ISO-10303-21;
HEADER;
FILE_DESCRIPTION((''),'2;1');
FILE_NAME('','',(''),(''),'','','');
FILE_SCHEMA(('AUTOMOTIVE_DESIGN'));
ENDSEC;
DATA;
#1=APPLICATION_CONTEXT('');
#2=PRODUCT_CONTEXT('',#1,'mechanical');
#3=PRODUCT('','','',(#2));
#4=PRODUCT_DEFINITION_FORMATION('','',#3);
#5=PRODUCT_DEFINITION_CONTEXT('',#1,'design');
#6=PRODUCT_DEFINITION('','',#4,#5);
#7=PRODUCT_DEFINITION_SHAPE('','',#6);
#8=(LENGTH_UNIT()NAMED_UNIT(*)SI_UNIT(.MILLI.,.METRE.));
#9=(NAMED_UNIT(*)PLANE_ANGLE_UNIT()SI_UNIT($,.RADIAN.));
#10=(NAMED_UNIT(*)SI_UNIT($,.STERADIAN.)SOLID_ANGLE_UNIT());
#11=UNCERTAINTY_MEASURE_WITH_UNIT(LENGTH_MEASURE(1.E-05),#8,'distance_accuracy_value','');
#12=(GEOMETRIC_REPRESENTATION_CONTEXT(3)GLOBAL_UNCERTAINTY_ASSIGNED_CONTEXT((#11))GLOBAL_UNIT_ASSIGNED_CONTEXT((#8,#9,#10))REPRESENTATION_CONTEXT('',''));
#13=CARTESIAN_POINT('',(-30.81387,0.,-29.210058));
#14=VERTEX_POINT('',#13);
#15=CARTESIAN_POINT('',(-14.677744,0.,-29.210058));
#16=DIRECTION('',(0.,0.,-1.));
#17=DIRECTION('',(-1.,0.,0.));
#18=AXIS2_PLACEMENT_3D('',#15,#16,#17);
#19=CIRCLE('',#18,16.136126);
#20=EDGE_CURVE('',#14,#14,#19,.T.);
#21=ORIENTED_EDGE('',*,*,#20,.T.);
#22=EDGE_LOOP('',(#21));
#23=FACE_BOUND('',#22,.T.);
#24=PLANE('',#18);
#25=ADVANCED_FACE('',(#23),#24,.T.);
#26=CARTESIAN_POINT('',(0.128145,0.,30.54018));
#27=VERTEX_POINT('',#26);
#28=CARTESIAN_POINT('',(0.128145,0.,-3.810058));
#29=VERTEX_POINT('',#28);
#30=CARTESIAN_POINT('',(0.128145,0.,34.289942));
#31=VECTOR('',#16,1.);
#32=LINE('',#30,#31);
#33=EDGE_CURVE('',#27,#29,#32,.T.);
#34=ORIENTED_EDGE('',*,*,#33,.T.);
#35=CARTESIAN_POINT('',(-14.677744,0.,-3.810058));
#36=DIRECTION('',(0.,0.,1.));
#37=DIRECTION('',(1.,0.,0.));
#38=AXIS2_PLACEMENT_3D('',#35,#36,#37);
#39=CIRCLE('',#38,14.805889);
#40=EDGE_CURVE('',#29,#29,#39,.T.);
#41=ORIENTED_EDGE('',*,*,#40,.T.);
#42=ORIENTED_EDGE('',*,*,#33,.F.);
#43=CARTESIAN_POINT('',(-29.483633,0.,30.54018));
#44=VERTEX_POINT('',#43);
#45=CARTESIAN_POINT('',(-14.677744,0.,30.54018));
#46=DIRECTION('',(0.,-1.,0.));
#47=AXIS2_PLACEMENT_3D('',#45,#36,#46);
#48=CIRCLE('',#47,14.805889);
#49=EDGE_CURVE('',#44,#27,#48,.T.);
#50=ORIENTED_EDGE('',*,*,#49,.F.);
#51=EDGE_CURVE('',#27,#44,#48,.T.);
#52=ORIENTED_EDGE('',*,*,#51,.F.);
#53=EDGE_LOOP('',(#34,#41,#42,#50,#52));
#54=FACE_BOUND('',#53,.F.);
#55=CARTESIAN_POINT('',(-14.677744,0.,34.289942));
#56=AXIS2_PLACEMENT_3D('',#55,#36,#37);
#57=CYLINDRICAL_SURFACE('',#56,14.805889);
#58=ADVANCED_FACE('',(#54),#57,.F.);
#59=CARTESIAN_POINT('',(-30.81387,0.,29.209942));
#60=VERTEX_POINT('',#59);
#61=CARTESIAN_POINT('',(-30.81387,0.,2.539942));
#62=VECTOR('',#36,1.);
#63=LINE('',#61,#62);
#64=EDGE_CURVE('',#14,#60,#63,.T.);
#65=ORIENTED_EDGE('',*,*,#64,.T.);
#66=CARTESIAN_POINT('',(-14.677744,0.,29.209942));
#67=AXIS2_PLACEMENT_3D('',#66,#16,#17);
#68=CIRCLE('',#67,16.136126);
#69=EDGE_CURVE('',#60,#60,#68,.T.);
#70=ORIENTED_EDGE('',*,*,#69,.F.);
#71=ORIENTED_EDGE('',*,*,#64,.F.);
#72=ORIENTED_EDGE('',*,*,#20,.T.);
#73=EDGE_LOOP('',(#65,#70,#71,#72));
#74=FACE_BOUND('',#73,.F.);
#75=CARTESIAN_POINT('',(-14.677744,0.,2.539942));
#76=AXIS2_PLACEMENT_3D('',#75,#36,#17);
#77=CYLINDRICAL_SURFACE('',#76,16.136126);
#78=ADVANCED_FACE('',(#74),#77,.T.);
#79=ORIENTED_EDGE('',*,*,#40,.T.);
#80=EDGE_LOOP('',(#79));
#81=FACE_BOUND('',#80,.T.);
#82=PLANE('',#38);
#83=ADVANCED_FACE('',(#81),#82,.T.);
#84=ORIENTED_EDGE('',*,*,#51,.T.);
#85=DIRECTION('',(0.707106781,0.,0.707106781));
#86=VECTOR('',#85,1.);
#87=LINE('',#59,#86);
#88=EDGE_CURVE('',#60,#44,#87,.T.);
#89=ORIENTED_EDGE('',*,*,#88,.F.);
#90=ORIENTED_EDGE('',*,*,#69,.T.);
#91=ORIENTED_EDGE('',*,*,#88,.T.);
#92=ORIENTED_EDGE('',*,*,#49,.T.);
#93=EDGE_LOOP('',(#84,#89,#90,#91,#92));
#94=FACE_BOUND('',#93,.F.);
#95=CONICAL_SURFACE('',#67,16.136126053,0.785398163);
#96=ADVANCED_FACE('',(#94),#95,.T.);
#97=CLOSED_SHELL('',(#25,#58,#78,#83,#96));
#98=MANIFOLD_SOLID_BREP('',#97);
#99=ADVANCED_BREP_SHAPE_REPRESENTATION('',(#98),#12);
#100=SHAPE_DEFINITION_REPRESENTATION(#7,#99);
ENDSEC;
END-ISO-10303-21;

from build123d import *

# Parameters (mm, degrees)
F0_W     = 16.1361260527
F0_H     = 63.5
F2_R     = 14.8058887609
F3_DEPTH = 38.1


# Not quite as in the source:
# - a fillet or chamfer that OpenCascade refuses, or shapes differently, is made with other operations: its cross-section is extruded or revolved along the edge and cut away or added


with BuildPart() as f1:
    # F0 (on Front) → F1 (revolve)
    with BuildSketch(Plane.XZ):
        with Locations((-22.7458069295, 2.539942234)):
            Rectangle(F0_W, F0_H)
    revolve(axis=Axis((-14.6777439032, 0, 2.539942234), (0, 0, -1)))

    # F2 (on face) → F3 (cut)
    with BuildSketch(Plane.XY.offset(34.289942234)):
        with Locations((-14.6777439032, 0)):
            Circle(F2_R)
    extrude(amount=-F3_DEPTH, mode=Mode.SUBTRACT)

    # F4: chamfer of 5.08 on 1 edges, made by hand

    # F4_s1 → F4_t2 (revolve, cut)
    with BuildSketch(Plane.XZ):
        Polygon((-30.8138699559, 29.209942234), (-25.7338699559, 34.289942234), (-30.8138699559, 34.289942234), align=None)
    revolve(axis=Axis((-14.6777439032, 0, 34.289942234), (0, 0, -1)), mode=Mode.SUBTRACT)


solid = f1.part
